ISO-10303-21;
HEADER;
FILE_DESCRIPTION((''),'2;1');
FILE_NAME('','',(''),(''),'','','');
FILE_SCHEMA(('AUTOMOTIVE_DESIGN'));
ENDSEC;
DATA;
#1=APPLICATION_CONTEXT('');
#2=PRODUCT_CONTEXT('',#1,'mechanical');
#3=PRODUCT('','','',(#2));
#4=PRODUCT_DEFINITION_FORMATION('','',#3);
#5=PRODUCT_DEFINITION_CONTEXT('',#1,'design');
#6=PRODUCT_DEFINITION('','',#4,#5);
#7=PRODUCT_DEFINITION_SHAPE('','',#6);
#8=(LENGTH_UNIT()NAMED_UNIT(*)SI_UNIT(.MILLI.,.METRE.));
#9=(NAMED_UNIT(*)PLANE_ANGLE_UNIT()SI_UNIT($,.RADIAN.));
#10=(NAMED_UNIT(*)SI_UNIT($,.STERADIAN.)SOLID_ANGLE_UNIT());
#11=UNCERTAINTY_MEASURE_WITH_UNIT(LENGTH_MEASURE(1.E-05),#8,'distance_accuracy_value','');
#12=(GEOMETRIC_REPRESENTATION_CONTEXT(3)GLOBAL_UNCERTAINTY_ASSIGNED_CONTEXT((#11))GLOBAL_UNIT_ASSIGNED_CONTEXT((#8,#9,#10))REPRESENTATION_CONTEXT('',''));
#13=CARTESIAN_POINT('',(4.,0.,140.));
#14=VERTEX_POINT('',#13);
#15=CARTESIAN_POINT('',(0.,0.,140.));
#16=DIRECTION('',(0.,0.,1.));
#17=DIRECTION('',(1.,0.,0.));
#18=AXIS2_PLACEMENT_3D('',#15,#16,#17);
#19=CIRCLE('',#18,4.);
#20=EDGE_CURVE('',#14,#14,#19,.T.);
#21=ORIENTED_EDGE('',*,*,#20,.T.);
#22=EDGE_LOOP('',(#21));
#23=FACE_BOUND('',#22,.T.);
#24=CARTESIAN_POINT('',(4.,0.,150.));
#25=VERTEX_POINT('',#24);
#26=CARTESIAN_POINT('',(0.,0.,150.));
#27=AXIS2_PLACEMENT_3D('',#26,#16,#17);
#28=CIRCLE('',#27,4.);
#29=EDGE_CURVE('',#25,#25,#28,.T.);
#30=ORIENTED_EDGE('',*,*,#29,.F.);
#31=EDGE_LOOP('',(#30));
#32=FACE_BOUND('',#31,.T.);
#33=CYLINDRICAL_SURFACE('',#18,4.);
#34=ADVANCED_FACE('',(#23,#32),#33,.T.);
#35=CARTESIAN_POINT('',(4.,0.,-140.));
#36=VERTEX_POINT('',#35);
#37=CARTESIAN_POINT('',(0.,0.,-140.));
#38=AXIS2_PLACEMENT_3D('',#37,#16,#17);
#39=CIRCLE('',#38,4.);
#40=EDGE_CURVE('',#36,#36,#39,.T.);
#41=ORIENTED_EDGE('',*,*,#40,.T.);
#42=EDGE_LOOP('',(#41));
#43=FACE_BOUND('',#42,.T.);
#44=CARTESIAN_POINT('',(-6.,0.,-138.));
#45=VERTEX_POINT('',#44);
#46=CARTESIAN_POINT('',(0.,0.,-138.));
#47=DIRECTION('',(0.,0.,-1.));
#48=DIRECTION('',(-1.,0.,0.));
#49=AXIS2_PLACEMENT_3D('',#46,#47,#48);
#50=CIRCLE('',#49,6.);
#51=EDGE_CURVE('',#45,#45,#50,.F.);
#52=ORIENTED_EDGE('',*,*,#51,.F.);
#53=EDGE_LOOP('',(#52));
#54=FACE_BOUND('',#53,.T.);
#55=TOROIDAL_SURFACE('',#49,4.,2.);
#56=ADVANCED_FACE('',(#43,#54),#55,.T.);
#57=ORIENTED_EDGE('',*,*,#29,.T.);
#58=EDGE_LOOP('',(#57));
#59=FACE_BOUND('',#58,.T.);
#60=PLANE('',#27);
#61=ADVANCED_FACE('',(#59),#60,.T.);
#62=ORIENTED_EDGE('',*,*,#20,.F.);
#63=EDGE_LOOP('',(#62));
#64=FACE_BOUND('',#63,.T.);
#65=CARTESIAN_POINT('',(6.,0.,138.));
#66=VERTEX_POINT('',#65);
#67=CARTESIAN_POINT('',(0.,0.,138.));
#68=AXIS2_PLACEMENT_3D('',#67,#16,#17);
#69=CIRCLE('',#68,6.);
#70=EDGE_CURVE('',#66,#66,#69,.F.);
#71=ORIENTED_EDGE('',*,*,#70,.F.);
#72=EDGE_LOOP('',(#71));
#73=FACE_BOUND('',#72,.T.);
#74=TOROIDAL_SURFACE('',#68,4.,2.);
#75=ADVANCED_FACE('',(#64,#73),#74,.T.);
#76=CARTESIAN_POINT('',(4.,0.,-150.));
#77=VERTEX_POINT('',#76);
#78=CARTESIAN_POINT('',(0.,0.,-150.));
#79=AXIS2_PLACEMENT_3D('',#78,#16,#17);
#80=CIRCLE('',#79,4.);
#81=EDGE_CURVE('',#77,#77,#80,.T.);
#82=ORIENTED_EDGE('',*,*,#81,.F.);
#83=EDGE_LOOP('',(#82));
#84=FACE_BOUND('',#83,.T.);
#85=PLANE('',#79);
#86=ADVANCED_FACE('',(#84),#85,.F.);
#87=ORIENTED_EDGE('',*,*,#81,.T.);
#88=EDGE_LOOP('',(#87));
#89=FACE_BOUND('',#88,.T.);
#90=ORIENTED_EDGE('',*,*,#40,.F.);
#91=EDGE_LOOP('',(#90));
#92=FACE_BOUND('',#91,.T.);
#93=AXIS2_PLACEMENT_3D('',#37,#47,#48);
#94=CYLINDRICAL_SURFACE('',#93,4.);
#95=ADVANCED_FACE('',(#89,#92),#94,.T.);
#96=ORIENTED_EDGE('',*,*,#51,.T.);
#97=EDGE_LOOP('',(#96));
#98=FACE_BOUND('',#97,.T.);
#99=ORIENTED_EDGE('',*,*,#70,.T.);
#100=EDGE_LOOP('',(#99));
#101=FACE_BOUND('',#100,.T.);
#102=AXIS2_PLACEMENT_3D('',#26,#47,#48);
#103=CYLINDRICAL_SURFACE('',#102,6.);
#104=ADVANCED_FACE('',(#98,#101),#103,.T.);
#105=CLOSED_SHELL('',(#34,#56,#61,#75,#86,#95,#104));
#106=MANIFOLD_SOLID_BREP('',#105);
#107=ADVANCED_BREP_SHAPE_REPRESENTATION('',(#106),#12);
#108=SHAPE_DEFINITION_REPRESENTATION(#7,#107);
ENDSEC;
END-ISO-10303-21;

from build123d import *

# Parameters (mm, degrees)
SKETCH1_R            = 6
BOSS_EXTRUDE1_DEPTH  = 150
SKETCH2_R            = 6
SKETCH2_R_2          = 4
CUT_EXTRUDE1_DEPTH   = 10
FILLET1_R            = 2
FILLET1_OF_MIRROR1_R = 2


with BuildPart() as part:
    # Sketch1 → Boss-Extrude1 (new, symmetric)
    with BuildSketch(Plane.XY):
        Circle(SKETCH1_R)
    extrude(amount=BOSS_EXTRUDE1_DEPTH, both=True)

    # Sketch2 → Cut-Extrude1 (cut)
    with BuildSketch(Plane.XY.offset(150)):
        Circle(SKETCH2_R)
        Circle(SKETCH2_R_2, mode=Mode.SUBTRACT)
    cut_extrude1 = extrude(amount=-CUT_EXTRUDE1_DEPTH, mode=Mode.SUBTRACT)

    # Fillet1
    fillet1_edges = [part.edges().sort_by_distance(p)[0] for p in [
        (-6, 0, 140),
    ]]
    fillet(fillet1_edges, radius=FILLET1_R - 0.0001)  # a hair under: the kernel refuses the full size

    # Mirror1: Cut-Extrude1 across plane
    add(cut_extrude1.mirror(Plane.XY), mode=Mode.SUBTRACT)

    # Fillet1 of Mirror1
    fillet1_of_mirror1_edges = [part.edges().sort_by_distance(p)[0] for p in [
        (-6, 0, -140),
    ]]
    fillet(fillet1_of_mirror1_edges, radius=FILLET1_OF_MIRROR1_R - 0.0001)  # a hair under: the kernel refuses the full size


solid = part.part
